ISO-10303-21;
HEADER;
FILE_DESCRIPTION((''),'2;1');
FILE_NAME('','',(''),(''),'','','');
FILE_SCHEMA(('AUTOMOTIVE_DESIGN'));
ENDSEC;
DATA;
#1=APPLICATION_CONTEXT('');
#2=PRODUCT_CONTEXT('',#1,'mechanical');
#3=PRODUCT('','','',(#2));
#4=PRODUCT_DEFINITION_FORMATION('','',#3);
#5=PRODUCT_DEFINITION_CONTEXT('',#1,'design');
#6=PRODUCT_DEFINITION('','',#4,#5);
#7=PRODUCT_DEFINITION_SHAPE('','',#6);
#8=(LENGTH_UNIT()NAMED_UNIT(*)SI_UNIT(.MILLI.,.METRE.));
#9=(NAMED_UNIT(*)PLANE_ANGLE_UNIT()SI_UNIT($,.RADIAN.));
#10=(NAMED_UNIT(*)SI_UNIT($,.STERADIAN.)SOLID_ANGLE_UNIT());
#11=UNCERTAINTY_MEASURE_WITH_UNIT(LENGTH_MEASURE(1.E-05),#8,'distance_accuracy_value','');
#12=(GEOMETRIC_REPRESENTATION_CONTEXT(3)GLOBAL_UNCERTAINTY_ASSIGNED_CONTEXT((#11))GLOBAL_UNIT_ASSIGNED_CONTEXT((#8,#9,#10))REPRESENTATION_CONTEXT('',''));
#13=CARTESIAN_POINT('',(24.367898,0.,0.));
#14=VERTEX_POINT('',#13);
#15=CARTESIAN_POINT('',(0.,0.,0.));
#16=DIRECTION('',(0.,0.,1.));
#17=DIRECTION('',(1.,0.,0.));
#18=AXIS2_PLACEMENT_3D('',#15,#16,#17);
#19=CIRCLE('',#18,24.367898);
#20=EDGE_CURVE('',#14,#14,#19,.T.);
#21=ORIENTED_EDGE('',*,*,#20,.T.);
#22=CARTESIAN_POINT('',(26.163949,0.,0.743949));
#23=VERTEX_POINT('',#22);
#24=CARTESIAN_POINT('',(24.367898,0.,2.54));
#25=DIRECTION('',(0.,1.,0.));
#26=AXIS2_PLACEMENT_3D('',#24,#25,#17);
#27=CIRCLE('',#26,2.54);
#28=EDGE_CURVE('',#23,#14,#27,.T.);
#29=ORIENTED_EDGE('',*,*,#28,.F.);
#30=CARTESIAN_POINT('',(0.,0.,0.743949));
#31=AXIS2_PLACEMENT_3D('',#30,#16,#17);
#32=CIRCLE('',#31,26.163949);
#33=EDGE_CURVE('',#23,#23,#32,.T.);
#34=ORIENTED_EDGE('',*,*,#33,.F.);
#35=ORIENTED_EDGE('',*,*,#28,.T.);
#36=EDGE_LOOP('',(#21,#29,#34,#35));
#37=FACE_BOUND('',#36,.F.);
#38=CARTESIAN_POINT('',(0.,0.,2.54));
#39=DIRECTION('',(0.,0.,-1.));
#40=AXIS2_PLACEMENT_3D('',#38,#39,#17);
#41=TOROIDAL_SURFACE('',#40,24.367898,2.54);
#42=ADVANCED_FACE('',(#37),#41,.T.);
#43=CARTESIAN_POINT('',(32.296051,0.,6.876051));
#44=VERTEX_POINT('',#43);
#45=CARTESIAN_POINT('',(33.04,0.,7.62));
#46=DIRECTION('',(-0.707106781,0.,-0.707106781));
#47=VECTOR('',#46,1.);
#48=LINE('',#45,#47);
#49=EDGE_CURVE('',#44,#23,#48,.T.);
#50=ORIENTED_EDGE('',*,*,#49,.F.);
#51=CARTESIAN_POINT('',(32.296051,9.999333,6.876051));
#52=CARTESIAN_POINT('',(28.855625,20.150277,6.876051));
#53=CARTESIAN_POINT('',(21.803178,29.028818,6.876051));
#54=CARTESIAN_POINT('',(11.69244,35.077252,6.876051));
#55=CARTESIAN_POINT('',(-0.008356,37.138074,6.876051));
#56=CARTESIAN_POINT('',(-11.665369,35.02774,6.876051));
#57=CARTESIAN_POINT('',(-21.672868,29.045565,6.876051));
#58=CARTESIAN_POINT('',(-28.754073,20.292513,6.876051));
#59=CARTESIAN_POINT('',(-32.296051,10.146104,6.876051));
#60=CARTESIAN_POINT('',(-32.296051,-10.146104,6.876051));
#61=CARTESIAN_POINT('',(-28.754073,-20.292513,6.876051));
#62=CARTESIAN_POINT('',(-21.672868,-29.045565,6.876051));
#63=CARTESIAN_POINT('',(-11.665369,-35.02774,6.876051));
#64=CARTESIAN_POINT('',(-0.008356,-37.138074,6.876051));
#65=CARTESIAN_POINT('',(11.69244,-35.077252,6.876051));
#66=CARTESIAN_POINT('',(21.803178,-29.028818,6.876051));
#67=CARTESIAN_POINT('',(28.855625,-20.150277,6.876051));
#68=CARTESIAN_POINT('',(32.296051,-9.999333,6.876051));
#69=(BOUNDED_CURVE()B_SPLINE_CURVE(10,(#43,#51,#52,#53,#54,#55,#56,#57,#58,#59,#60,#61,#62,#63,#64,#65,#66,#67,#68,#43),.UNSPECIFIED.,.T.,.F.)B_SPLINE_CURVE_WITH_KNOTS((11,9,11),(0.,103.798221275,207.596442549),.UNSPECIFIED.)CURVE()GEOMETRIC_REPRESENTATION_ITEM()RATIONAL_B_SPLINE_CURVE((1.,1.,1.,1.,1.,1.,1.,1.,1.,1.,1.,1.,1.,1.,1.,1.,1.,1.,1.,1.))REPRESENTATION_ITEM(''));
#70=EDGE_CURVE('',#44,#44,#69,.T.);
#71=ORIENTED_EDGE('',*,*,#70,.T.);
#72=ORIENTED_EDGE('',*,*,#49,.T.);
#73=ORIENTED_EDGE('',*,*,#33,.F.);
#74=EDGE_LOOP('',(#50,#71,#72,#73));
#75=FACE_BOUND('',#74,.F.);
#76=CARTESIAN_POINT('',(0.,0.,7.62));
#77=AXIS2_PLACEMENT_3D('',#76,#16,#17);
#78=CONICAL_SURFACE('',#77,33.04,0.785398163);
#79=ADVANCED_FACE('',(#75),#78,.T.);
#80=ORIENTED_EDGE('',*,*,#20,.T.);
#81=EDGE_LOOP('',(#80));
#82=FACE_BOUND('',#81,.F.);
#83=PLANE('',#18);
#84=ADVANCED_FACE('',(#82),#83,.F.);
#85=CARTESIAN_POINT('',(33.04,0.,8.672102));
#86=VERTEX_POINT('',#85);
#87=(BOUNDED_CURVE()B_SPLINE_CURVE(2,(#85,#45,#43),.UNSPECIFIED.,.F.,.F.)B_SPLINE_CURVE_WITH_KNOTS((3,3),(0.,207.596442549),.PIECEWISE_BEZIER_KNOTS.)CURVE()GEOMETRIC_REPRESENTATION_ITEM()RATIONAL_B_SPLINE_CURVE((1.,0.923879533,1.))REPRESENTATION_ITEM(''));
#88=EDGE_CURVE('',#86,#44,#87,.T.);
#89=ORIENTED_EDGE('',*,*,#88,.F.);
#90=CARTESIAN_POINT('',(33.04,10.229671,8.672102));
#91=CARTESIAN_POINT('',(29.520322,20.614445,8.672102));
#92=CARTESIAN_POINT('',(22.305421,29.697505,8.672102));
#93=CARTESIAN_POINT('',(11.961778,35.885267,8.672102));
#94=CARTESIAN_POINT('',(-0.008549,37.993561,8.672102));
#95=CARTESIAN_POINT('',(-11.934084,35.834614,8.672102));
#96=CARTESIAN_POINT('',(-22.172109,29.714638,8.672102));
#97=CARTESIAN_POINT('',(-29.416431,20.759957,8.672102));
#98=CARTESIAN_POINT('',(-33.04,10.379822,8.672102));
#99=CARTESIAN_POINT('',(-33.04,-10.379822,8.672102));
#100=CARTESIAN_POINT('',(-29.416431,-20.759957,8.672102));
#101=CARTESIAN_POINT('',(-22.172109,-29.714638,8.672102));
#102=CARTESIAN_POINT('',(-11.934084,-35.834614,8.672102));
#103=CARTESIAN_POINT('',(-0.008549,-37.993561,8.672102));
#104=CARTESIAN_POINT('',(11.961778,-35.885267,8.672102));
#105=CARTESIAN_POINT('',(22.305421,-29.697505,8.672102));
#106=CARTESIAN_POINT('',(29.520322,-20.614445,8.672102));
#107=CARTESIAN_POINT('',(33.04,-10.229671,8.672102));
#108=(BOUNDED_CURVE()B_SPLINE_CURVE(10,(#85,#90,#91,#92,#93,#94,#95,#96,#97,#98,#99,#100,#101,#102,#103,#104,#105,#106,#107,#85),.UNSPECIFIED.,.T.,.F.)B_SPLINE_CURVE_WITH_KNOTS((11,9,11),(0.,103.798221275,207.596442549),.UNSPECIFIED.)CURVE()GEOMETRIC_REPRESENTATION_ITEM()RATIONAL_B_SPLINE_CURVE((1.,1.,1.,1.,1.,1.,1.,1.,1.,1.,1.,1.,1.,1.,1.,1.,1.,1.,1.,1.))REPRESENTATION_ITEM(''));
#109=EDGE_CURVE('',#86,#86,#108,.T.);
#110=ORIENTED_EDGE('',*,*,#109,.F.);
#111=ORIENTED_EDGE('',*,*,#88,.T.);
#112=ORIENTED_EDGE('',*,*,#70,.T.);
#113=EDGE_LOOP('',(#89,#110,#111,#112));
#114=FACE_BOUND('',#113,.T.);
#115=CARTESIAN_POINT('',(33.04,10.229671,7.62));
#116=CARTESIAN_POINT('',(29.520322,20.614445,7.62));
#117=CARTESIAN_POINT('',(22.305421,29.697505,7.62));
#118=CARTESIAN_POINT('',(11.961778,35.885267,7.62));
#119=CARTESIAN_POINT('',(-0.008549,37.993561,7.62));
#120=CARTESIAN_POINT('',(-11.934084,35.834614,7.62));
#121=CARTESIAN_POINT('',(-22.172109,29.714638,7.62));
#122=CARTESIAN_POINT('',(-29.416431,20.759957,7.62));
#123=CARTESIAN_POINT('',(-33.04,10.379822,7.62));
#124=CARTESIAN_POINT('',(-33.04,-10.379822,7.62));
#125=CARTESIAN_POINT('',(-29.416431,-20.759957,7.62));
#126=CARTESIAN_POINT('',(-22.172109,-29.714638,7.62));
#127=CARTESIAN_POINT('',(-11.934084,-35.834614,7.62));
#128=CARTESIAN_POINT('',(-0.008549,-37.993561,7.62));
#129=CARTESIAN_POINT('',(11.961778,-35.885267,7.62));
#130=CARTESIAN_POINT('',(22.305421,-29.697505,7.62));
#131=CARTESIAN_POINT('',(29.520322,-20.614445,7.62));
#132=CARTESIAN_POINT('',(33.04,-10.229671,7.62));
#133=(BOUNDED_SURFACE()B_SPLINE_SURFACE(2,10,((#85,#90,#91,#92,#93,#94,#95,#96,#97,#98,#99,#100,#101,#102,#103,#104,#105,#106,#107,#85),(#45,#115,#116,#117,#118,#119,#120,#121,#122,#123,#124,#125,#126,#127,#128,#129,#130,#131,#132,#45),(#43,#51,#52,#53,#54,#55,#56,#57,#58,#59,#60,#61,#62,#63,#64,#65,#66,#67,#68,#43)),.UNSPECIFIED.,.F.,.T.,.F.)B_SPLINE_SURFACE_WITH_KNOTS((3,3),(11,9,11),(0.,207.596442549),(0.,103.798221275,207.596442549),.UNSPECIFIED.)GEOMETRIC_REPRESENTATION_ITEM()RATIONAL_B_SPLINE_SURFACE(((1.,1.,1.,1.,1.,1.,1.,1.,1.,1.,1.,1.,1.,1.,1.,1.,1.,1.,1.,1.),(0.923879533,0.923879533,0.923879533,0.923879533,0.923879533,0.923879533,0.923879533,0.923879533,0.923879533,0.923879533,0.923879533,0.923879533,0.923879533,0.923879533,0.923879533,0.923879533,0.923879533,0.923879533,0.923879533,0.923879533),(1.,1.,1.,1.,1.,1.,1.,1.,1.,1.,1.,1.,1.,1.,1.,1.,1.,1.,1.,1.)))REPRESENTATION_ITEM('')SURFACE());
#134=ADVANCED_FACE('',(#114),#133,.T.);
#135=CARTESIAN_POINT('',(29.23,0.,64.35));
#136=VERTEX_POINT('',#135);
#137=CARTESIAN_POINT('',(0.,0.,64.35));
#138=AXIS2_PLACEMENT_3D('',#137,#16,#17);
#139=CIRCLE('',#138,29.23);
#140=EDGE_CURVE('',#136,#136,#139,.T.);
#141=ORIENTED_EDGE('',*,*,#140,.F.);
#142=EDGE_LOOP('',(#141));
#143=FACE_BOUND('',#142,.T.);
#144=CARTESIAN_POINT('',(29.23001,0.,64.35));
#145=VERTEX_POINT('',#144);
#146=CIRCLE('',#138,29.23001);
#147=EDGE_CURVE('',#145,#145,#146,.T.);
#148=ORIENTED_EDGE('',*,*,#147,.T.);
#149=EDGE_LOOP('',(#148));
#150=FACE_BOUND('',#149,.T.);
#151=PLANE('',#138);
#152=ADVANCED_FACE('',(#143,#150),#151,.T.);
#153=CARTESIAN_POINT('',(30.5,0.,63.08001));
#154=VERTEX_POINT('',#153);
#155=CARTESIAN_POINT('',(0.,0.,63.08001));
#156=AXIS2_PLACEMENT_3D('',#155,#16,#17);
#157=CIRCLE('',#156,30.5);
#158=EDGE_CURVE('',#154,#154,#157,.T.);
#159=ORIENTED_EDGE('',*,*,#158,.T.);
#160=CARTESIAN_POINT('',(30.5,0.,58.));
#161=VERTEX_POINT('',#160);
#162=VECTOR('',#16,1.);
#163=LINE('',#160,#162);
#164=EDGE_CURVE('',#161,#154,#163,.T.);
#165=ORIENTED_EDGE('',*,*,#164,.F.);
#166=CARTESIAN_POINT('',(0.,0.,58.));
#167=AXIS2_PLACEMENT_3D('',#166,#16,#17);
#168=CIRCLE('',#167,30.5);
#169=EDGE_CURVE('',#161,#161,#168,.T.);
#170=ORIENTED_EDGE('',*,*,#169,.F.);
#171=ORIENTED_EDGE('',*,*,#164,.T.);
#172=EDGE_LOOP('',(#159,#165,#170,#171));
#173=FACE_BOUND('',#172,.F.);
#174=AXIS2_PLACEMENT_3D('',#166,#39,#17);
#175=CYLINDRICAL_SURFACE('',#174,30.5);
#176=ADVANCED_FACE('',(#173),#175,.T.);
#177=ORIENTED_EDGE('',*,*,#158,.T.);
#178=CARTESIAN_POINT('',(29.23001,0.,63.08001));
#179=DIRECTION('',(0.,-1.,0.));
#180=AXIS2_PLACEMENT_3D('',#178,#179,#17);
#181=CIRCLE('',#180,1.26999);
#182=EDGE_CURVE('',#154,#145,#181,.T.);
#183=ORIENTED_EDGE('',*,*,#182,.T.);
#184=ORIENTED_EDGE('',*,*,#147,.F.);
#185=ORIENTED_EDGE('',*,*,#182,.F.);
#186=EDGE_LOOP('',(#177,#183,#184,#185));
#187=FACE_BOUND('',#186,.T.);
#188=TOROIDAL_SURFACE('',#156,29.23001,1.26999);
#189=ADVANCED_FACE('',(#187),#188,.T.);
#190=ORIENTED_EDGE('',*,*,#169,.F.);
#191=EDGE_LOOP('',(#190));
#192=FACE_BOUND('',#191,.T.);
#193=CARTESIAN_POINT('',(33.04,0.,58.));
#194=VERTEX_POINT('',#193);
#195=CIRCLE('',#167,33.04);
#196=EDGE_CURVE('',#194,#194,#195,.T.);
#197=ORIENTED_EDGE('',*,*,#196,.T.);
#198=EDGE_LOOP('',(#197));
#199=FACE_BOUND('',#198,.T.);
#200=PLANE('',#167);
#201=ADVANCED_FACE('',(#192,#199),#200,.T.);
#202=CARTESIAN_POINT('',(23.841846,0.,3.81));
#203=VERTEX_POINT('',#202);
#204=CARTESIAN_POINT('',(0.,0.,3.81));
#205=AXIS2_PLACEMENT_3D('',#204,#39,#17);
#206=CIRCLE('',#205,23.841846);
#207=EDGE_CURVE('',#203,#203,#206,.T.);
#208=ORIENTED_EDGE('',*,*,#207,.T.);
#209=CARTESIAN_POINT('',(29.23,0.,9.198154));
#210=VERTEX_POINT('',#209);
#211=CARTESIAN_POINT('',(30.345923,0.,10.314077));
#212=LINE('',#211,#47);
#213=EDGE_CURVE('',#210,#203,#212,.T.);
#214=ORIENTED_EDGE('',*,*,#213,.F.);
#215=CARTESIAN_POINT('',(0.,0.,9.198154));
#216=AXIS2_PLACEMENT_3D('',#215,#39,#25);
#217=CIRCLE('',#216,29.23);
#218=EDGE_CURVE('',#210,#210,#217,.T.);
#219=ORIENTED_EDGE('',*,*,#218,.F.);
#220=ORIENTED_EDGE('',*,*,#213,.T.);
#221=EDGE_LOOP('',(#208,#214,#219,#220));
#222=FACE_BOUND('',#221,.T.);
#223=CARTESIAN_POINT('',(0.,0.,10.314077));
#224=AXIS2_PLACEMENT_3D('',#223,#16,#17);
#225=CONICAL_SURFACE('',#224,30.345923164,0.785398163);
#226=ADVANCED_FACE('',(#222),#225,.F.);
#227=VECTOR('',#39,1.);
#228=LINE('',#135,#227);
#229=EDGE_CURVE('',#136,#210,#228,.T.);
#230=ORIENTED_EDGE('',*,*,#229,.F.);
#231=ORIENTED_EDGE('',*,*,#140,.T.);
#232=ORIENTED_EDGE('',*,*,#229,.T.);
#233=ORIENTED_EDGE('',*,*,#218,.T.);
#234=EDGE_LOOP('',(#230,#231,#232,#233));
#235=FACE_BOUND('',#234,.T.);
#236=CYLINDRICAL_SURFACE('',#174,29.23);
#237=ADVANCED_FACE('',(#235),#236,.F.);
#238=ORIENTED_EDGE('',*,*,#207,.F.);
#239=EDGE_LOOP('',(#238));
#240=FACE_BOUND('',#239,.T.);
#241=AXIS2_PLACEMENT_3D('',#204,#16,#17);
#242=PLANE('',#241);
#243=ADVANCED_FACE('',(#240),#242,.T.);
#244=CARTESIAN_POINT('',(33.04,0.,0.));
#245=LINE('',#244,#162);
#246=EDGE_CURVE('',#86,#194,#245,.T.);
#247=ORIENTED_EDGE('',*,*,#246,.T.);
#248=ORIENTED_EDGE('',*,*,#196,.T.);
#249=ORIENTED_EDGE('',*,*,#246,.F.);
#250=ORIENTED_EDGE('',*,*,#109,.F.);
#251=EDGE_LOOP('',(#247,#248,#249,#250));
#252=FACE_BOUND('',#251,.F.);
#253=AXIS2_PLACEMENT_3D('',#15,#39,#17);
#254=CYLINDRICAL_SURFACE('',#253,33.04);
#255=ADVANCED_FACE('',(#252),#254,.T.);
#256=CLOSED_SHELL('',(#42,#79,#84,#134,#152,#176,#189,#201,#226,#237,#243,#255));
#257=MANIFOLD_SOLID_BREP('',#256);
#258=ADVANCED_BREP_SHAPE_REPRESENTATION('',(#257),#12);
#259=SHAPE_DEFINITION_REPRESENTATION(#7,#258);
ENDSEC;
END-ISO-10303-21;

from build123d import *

# Parameters (mm, degrees)
F0_R     = 33.04
F1_DEPTH = 58
F2_SIZE  = 7.62
F3_T     = -3.81
F4_R     = 2.54
F5_R     = 30.5
F5_R_2   = 29.23
F6_DEPTH = 6.35
F7_R     = 1.26999


# Not quite as in the source:
# - a fillet or chamfer is up to 0.001 mm smaller than in the source, because OpenCascade refuses the exact size


with BuildPart() as f1:
    # F0 (on Top) → F1 (new body)
    with BuildSketch(Plane.XY):
        Circle(F0_R)
    extrude(amount=F1_DEPTH)

    # F2
    f2_edges = [f1.edges().sort_by_distance(p)[0] for p in [
        (-33.04, 0, 0),
    ]]
    chamfer(f2_edges, length=F2_SIZE)

    # F3
    f3_openings = [f1.faces().sort_by_distance(p)[0] for p in [
        (0, 0, 58),
    ]]
    offset(amount=F3_T, openings=f3_openings)

    # F4
    f4_edges = [f1.edges().sort_by_distance(p)[0] for p in [
        (-33.04, 0, 7.62),
        (-25.42, 0, 0),
    ]]
    fillet(f4_edges, radius=F4_R)

    # F5 (on face) → F6 (join)
    with BuildSketch(Plane.XY.offset(58)):
        Circle(F5_R)
        Circle(F5_R_2, mode=Mode.SUBTRACT)
    extrude(amount=F6_DEPTH)

    # F7 (radius 1.27 in the source; OpenCascade refuses exactly that, so slightly less here)
    f7_edges = [f1.edges().sort_by_distance(p)[0] for p in [
        (-30.5, 0, 64.35),
    ]]
    fillet(f7_edges, radius=F7_R)


solid = f1.part
